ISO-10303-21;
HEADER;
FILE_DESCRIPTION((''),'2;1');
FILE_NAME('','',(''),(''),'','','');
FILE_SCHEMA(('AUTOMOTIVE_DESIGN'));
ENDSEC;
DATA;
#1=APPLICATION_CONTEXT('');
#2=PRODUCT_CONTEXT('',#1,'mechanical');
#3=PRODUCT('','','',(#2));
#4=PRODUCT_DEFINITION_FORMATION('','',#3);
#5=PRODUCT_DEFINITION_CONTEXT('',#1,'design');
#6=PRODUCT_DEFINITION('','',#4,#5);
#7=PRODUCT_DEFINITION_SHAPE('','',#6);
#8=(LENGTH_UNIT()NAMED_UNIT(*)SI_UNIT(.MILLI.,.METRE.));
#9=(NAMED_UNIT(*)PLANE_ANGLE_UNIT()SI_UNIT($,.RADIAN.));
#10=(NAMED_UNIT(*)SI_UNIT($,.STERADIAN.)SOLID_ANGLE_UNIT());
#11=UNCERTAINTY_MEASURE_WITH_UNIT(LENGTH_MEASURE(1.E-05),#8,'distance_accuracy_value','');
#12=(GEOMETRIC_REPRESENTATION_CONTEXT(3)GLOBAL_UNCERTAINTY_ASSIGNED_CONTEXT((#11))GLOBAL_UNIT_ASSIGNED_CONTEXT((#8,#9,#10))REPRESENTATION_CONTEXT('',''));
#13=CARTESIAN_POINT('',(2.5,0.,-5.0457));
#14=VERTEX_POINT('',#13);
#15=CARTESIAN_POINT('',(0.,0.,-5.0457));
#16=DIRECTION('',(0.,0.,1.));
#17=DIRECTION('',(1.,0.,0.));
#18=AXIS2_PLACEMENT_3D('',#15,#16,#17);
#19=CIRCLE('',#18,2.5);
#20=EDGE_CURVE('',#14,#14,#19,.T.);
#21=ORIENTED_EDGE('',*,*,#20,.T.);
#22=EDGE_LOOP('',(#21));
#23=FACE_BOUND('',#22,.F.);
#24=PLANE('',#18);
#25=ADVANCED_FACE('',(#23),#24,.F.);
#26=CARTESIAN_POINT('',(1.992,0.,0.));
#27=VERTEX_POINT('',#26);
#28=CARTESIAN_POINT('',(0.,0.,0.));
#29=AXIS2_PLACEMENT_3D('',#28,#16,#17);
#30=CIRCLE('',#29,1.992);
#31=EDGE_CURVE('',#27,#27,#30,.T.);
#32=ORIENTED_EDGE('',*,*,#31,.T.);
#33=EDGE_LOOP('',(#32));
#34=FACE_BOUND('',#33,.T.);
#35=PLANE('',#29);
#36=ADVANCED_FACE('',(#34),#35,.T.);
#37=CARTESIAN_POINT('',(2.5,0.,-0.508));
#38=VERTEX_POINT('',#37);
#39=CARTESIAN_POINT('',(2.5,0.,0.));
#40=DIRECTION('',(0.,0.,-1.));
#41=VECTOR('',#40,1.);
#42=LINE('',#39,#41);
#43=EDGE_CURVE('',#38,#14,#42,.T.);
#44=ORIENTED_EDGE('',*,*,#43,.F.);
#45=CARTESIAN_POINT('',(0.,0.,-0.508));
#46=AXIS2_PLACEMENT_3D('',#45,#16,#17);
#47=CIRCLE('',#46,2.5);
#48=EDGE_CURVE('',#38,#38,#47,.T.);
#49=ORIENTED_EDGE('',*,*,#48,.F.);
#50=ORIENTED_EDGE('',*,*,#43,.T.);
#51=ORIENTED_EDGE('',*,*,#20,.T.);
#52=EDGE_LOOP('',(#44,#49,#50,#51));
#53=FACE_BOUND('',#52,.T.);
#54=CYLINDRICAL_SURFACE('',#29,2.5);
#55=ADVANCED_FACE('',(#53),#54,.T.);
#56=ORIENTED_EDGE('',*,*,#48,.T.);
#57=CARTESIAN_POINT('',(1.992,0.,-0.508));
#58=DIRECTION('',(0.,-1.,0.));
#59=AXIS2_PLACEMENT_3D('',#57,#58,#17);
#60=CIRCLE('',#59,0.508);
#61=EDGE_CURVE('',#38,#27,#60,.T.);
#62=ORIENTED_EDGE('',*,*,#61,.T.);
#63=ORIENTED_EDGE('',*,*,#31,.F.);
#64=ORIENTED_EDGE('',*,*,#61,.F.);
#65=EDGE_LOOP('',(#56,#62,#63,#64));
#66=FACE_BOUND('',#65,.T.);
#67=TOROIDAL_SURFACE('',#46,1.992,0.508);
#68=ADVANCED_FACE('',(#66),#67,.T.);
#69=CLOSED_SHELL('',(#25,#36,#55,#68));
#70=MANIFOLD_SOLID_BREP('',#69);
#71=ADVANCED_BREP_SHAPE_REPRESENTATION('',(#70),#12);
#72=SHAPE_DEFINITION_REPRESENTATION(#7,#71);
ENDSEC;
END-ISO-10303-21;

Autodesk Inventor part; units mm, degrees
ref_plane "YZ Plane" through (0, 0, 0) normal (1, 0, 0) x (0, 1, 0)
ref_plane "XZ Plane" through (0, 0, 0) normal (0, 1, 0) x (-1, 0, 0)
ref_plane "XY Plane" through (0, 0, 0) normal (0, 0, 1) x (1, 0, 0)
sketch "Sketch1" plane through (0, 0, 0) normal (0, 0, 1) x (1, 0, 0)
  circle A0 centre (0, 0) radius 2.5
  dimension "d0" = 5
extrude "Extrusion1" add sketch "Sketch1" against normal blind 5.0457
fillet "Face Fillet1" radius 0.508 1 edges at (-2.5, 0, 0)
properties part number "Mini Lights Yellow"
